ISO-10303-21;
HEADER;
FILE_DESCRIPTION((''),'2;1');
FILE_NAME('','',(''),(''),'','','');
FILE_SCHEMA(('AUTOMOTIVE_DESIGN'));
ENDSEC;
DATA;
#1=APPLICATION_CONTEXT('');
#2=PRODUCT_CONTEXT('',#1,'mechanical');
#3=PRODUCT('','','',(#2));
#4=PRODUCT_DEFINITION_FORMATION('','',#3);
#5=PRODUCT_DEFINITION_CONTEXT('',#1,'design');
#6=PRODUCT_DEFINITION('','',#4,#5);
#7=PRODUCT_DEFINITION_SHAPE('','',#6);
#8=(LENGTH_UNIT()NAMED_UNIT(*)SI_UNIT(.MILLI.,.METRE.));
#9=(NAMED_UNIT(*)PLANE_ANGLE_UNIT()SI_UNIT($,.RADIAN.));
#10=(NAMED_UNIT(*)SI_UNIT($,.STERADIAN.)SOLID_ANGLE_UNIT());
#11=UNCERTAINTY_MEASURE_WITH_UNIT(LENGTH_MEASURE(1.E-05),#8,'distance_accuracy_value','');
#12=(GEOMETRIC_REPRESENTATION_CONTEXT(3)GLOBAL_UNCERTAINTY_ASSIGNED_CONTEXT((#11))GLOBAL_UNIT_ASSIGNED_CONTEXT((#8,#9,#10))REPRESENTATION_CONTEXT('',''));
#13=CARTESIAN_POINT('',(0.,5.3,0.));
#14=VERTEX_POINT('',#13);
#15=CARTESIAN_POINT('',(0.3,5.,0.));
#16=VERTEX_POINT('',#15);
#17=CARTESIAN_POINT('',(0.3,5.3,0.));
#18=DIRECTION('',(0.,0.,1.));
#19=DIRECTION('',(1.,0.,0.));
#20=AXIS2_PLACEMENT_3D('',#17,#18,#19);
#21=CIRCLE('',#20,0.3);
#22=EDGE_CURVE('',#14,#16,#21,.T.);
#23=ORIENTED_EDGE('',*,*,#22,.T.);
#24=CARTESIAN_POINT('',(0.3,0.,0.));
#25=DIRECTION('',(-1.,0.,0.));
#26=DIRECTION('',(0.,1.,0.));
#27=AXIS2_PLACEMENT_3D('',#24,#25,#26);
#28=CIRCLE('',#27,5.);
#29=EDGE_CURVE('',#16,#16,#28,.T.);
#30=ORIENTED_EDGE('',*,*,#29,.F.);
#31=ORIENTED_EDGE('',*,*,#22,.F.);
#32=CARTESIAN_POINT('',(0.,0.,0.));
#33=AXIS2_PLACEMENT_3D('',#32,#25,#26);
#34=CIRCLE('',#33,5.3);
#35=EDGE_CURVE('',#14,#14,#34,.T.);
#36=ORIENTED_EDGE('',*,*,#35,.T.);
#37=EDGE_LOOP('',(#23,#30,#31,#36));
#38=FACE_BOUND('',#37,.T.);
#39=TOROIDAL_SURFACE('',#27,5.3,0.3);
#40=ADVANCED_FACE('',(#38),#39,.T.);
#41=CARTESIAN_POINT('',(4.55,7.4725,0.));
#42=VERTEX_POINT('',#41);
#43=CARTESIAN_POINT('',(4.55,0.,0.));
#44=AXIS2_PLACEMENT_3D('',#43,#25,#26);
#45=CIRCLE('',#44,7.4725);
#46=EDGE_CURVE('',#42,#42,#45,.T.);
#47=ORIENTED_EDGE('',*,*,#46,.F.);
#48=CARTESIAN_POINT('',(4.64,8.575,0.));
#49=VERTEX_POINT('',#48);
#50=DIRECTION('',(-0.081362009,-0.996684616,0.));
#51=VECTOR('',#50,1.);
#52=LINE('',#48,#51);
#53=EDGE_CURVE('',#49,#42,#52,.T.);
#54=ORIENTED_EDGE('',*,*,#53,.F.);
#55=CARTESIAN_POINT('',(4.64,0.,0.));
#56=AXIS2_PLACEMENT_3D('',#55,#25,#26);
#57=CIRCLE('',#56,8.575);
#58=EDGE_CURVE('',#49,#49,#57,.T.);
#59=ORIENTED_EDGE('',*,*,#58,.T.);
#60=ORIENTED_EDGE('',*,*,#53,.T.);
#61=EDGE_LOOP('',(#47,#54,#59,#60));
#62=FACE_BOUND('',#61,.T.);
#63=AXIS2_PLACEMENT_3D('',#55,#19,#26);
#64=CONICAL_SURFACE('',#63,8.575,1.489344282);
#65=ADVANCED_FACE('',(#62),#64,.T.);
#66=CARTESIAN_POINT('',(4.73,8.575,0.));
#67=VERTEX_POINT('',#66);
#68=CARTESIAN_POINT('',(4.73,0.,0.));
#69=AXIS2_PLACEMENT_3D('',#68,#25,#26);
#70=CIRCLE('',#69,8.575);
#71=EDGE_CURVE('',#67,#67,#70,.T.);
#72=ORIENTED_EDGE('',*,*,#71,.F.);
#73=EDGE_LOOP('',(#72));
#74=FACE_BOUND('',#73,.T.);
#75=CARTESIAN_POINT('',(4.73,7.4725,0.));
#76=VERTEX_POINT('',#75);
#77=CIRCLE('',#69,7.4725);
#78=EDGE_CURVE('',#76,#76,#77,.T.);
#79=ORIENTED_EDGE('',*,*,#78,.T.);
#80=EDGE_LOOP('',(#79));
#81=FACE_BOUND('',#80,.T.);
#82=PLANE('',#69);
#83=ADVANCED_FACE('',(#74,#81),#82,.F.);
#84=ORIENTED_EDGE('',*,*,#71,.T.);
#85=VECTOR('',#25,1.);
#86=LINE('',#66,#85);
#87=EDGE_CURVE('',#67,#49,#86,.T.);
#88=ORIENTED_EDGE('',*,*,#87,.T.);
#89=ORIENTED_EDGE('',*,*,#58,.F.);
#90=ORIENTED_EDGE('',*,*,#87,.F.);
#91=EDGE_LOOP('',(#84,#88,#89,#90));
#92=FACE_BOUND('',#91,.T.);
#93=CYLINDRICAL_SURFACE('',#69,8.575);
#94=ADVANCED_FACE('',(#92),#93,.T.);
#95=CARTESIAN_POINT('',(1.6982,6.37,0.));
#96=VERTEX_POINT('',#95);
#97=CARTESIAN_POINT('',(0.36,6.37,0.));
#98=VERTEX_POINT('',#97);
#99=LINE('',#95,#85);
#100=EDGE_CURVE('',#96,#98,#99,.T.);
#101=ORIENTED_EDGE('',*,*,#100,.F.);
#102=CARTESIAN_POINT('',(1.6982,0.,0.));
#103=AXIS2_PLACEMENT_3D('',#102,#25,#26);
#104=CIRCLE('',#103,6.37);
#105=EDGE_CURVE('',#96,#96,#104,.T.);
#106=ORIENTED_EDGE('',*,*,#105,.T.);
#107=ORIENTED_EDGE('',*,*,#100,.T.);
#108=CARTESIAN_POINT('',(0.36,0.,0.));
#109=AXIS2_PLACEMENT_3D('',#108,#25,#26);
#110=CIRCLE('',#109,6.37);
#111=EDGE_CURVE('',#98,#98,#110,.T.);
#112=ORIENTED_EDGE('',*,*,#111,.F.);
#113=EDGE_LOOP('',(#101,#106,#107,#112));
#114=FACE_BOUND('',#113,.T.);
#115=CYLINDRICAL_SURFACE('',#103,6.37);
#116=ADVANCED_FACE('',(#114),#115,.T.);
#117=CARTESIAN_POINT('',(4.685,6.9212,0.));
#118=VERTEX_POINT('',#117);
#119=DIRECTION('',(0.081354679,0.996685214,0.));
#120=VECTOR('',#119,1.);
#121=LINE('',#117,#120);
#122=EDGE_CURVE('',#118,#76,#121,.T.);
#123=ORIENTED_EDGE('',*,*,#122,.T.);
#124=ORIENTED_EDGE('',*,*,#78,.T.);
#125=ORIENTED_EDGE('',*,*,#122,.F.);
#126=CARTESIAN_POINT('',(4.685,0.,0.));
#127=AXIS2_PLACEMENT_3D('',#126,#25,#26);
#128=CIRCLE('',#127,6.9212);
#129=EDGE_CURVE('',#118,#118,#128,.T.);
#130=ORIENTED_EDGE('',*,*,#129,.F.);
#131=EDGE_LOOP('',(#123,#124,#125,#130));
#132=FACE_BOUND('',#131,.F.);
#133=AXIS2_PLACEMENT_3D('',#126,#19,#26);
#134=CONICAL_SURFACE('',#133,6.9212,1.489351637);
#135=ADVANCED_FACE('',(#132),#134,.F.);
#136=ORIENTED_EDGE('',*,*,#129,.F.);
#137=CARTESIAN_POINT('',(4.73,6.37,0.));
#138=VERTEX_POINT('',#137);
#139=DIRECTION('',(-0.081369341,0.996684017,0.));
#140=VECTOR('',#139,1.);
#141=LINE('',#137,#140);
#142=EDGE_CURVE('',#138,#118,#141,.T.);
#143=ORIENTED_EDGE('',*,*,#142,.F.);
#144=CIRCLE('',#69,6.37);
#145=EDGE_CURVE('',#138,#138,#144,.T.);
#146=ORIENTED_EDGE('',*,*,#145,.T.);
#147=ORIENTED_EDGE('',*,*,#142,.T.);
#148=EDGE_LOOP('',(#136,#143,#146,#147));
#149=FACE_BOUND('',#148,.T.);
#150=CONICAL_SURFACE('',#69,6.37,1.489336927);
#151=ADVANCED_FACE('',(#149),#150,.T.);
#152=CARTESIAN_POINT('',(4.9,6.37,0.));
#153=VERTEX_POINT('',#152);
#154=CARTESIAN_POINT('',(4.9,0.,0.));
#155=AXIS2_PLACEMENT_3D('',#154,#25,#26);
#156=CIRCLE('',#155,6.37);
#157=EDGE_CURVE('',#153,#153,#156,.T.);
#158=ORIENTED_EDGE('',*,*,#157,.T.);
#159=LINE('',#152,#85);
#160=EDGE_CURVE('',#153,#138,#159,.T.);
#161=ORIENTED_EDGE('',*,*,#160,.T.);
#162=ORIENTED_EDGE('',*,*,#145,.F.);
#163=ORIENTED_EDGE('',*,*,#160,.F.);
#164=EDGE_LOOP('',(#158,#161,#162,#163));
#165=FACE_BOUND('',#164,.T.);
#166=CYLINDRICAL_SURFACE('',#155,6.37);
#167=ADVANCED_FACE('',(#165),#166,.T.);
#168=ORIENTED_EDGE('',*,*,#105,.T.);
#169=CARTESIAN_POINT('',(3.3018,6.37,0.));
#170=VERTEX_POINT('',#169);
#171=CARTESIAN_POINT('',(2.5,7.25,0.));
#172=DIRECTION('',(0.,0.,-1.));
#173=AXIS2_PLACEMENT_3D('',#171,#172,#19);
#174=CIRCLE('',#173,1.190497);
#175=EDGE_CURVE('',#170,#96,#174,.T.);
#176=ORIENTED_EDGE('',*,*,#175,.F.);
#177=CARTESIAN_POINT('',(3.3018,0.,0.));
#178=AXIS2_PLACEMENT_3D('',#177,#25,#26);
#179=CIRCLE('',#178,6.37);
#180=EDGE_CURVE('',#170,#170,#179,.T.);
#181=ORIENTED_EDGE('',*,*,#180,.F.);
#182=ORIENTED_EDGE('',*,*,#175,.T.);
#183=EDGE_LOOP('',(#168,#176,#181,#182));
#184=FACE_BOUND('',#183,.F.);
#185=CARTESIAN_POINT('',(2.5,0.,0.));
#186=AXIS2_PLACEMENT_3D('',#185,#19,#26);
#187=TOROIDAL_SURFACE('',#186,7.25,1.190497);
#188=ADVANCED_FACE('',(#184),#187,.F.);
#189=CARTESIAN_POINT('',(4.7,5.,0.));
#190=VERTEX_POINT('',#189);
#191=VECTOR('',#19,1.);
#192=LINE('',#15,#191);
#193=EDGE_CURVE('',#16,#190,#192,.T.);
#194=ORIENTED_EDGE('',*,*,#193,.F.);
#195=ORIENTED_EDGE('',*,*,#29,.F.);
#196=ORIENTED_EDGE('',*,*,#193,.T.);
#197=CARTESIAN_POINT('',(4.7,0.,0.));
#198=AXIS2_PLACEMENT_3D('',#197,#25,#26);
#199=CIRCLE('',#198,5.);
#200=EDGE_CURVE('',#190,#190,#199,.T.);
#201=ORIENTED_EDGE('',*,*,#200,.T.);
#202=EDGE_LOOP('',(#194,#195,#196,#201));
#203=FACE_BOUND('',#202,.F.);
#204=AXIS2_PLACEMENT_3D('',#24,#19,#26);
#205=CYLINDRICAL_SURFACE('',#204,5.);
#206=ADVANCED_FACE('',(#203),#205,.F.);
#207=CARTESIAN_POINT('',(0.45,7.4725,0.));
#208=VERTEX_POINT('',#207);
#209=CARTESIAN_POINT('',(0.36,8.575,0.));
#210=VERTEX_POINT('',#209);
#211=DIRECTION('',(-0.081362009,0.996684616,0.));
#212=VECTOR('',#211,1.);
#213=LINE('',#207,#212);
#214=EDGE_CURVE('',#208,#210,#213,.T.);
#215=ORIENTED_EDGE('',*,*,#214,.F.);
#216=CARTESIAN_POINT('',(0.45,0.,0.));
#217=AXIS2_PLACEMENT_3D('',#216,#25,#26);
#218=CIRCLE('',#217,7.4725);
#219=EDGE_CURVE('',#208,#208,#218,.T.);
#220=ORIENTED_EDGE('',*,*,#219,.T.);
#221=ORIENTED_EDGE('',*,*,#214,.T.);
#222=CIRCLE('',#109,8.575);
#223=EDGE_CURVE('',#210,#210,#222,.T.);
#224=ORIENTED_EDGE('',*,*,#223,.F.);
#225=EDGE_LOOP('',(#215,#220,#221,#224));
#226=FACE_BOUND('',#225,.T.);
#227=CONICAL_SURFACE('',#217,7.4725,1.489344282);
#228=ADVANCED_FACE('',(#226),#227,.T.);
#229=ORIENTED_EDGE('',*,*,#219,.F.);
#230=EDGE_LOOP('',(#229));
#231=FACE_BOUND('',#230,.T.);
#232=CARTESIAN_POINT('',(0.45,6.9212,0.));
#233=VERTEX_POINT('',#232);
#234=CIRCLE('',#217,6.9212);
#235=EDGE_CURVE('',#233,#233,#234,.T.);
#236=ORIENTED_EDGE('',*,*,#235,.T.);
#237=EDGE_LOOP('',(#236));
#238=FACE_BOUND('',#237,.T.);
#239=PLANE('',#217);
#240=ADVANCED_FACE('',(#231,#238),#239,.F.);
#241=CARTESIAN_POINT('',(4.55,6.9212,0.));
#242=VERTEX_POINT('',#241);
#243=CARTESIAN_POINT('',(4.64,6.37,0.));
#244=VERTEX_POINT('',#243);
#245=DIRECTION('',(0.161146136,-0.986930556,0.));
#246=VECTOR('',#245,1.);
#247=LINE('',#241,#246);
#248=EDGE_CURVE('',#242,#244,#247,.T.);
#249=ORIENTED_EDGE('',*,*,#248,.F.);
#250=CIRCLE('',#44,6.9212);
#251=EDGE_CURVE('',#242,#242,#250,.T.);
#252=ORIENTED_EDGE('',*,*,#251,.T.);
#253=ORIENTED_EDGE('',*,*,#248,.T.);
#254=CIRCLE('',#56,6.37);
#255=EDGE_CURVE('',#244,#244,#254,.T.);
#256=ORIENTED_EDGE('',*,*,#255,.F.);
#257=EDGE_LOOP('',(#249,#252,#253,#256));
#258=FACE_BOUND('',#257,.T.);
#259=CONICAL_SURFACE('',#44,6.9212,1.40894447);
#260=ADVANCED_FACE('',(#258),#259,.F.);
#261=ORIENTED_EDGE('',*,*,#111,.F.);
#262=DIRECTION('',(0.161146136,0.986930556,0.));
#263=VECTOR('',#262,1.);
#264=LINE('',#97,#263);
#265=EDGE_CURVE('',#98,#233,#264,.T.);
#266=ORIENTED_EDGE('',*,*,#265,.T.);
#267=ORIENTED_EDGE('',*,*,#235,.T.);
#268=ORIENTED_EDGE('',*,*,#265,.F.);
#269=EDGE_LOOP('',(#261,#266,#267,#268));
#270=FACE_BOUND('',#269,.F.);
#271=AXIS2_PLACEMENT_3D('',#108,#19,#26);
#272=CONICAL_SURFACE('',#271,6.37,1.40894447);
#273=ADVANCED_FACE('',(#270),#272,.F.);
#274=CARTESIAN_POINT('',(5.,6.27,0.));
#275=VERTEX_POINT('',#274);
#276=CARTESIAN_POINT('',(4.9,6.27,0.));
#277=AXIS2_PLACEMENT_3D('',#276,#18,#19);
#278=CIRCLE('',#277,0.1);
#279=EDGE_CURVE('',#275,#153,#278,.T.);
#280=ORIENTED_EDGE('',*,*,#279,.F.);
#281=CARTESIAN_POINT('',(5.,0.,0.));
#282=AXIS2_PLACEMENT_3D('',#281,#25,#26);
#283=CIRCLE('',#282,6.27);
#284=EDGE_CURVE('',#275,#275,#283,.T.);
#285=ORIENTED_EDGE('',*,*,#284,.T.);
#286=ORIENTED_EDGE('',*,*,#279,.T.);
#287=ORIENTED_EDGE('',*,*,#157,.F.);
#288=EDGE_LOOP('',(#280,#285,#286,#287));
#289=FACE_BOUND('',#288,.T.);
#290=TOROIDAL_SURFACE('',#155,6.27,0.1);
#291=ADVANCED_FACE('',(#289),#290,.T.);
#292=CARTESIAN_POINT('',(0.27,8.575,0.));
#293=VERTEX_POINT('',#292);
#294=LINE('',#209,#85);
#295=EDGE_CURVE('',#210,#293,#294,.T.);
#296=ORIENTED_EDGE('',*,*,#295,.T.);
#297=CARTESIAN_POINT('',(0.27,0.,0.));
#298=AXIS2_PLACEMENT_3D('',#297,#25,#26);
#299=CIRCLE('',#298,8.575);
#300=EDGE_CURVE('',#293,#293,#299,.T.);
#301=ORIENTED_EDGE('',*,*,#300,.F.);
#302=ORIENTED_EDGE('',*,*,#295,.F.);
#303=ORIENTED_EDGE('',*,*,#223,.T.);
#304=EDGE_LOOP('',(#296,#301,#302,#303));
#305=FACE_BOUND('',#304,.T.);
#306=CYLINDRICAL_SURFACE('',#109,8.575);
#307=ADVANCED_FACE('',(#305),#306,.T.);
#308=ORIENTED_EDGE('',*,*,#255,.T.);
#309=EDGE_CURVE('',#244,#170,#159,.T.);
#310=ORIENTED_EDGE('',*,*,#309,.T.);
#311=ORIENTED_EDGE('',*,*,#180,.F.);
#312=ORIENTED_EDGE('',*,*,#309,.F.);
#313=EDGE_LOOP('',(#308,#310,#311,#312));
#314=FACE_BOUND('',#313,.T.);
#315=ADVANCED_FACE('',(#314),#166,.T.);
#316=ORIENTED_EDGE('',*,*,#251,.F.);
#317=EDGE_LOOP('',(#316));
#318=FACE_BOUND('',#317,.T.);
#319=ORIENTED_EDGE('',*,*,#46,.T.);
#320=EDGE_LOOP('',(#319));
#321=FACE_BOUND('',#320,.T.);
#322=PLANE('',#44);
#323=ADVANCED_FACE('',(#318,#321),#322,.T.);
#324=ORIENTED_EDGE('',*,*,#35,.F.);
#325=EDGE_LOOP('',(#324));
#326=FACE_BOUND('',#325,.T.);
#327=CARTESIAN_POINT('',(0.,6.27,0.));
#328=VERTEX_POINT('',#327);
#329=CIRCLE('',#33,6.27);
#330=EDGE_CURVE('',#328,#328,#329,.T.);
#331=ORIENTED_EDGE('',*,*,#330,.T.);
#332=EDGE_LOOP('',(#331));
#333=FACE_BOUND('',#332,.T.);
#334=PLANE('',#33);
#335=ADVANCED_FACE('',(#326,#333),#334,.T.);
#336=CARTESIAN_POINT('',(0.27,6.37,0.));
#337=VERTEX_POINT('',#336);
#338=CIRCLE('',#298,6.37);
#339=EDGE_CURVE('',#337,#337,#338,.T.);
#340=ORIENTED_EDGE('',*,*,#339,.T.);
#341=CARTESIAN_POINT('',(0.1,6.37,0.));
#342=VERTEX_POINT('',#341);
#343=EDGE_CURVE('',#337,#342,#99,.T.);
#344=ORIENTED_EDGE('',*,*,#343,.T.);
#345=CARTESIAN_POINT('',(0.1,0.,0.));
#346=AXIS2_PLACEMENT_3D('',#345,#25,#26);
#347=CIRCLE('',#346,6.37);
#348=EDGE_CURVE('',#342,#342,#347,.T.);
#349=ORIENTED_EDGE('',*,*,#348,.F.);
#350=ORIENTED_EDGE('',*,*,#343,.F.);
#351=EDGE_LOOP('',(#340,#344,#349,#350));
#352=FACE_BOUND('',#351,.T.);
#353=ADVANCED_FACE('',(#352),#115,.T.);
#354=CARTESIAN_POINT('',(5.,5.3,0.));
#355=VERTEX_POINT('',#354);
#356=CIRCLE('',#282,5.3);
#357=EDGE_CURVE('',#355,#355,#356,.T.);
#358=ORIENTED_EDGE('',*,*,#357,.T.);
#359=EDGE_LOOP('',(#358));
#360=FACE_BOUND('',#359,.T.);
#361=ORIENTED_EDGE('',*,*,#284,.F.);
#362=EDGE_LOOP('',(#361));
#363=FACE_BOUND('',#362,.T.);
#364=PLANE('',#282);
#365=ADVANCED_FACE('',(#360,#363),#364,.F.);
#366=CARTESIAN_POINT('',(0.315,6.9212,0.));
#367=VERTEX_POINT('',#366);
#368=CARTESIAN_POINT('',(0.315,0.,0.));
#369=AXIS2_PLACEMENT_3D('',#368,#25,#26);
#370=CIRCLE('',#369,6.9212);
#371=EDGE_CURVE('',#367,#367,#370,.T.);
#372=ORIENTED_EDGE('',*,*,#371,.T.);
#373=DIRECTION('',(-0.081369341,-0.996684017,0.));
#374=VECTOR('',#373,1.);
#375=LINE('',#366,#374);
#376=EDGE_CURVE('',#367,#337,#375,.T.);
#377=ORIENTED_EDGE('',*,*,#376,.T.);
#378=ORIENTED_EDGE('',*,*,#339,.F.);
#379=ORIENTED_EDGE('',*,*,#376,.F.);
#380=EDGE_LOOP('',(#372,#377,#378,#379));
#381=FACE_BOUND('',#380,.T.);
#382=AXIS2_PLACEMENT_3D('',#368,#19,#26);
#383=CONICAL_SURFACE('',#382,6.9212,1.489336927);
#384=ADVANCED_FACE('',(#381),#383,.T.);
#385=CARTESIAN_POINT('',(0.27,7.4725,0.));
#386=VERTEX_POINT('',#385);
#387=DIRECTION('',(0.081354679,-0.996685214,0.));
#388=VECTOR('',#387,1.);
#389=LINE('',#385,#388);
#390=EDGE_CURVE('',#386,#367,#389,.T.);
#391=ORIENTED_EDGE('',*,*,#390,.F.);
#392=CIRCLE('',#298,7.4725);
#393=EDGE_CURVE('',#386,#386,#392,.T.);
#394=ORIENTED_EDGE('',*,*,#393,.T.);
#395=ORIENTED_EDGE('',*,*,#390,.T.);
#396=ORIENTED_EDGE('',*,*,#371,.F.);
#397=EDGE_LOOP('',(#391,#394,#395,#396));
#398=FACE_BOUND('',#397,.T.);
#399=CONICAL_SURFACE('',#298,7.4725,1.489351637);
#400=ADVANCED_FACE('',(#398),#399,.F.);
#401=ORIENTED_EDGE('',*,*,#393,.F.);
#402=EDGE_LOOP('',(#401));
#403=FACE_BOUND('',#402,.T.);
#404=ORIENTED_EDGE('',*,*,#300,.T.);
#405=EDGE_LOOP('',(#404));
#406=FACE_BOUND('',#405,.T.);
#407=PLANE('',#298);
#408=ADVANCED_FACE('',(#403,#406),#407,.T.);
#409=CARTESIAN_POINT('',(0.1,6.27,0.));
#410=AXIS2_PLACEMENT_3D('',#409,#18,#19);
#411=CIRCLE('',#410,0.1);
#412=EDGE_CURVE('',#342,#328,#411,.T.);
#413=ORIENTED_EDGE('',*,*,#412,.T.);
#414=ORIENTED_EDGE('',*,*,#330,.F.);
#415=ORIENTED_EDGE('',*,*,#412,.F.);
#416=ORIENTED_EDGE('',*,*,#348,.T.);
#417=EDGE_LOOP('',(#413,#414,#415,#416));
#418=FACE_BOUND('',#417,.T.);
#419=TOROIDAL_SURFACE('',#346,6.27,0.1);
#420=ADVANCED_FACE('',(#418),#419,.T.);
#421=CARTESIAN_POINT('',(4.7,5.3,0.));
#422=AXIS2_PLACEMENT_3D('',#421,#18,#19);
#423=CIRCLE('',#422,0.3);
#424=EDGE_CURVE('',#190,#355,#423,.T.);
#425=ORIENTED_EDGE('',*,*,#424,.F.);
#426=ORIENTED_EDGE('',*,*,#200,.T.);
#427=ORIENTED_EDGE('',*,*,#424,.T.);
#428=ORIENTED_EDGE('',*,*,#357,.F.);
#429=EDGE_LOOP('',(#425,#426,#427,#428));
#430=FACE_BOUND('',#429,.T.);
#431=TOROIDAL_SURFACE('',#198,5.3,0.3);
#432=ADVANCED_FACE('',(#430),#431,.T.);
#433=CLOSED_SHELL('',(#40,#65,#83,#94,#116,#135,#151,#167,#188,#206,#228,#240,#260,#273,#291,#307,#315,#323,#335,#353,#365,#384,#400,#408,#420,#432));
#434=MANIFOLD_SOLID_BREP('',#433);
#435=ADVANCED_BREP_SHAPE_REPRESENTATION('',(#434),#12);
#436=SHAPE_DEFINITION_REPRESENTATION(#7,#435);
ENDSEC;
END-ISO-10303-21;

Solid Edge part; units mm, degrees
sketch "Sketch1" plane through (0, 0, 0) normal (0, 0, 1) x (1, 0, 0)
  line L0 (0, 6.27) -> (0, 5.3)
  arc A0 (0, 5.3) -> (0.3, 5) centre (0.3, 5.3) ccw
  line L1 (0.3, 5) -> (4.7, 5)
  arc A1 (4.7, 5) -> (5, 5.3) centre (4.7, 5.3) ccw
  line L2 (5, 5.3) -> (5, 6.27)
  arc A2 (5, 6.27) -> (4.9, 6.37) centre (4.9, 6.27) ccw
  line L3 (4.9, 6.37) -> (3.3018, 6.37)
  arc A3 (3.3018, 6.37) -> (1.6982, 6.37) centre (2.5, 7.25) cw
  line L4 (1.6982, 6.37) -> (0.1, 6.37)
  arc A4 (0.1, 6.37) -> (0, 6.27) centre (0.1, 6.27) ccw
revolve "RevolvedProtrusion1" add sketch "Sketch1" angle 360 about axis through (50, 0, 0) along (-1, 0, 0)
sketch "Sketch2" plane through (0, 0, 0) normal (0, 0, 1) x (1, 0, 0)
  line L0 (0.27, 6.37) -> (0.36, 6.37)
  line L1 (0.36, 6.37) -> (0.45, 6.9212)
  line L2 (0.45, 6.9212) -> (0.45, 7.4725)
  line L3 (0.45, 7.4725) -> (0.36, 8.575)
  line L4 (0.36, 8.575) -> (0.27, 8.575)
  line L5 (0.27, 8.575) -> (0.27, 7.4725)
  line L6 (0.27, 7.4725) -> (0.315, 6.9212)
  line L7 (0.315, 6.9212) -> (0.27, 6.37)
revolve "RevolvedProtrusion2" add sketch "Sketch2" angle 360 about axis through (2, 0, 0) along (-1, 0, 0)
sketch "Sketch3" plane through (0, 0, 0) normal (0, 0, 1) x (1, 0, 0)
  line L0 (4.55, 7.4725) -> (4.55, 6.9212)
  line L1 (4.55, 6.9212) -> (4.64, 6.37)
  line L2 (4.64, 6.37) -> (4.73, 6.37)
  line L3 (4.73, 6.37) -> (4.685, 6.9212)
  line L4 (4.685, 6.9212) -> (4.73, 7.4725)
  line L5 (4.73, 7.4725) -> (4.73, 8.575)
  line L6 (4.73, 8.575) -> (4.64, 8.575)
  line L7 (4.64, 8.575) -> (4.55, 7.4725)
revolve "RevolvedProtrusion3" add sketch "Sketch3" angle 360 about axis through (2, 0, 0) along (-1, 0, 0)
properties part number "SKF_61800-2RS1_ir"
